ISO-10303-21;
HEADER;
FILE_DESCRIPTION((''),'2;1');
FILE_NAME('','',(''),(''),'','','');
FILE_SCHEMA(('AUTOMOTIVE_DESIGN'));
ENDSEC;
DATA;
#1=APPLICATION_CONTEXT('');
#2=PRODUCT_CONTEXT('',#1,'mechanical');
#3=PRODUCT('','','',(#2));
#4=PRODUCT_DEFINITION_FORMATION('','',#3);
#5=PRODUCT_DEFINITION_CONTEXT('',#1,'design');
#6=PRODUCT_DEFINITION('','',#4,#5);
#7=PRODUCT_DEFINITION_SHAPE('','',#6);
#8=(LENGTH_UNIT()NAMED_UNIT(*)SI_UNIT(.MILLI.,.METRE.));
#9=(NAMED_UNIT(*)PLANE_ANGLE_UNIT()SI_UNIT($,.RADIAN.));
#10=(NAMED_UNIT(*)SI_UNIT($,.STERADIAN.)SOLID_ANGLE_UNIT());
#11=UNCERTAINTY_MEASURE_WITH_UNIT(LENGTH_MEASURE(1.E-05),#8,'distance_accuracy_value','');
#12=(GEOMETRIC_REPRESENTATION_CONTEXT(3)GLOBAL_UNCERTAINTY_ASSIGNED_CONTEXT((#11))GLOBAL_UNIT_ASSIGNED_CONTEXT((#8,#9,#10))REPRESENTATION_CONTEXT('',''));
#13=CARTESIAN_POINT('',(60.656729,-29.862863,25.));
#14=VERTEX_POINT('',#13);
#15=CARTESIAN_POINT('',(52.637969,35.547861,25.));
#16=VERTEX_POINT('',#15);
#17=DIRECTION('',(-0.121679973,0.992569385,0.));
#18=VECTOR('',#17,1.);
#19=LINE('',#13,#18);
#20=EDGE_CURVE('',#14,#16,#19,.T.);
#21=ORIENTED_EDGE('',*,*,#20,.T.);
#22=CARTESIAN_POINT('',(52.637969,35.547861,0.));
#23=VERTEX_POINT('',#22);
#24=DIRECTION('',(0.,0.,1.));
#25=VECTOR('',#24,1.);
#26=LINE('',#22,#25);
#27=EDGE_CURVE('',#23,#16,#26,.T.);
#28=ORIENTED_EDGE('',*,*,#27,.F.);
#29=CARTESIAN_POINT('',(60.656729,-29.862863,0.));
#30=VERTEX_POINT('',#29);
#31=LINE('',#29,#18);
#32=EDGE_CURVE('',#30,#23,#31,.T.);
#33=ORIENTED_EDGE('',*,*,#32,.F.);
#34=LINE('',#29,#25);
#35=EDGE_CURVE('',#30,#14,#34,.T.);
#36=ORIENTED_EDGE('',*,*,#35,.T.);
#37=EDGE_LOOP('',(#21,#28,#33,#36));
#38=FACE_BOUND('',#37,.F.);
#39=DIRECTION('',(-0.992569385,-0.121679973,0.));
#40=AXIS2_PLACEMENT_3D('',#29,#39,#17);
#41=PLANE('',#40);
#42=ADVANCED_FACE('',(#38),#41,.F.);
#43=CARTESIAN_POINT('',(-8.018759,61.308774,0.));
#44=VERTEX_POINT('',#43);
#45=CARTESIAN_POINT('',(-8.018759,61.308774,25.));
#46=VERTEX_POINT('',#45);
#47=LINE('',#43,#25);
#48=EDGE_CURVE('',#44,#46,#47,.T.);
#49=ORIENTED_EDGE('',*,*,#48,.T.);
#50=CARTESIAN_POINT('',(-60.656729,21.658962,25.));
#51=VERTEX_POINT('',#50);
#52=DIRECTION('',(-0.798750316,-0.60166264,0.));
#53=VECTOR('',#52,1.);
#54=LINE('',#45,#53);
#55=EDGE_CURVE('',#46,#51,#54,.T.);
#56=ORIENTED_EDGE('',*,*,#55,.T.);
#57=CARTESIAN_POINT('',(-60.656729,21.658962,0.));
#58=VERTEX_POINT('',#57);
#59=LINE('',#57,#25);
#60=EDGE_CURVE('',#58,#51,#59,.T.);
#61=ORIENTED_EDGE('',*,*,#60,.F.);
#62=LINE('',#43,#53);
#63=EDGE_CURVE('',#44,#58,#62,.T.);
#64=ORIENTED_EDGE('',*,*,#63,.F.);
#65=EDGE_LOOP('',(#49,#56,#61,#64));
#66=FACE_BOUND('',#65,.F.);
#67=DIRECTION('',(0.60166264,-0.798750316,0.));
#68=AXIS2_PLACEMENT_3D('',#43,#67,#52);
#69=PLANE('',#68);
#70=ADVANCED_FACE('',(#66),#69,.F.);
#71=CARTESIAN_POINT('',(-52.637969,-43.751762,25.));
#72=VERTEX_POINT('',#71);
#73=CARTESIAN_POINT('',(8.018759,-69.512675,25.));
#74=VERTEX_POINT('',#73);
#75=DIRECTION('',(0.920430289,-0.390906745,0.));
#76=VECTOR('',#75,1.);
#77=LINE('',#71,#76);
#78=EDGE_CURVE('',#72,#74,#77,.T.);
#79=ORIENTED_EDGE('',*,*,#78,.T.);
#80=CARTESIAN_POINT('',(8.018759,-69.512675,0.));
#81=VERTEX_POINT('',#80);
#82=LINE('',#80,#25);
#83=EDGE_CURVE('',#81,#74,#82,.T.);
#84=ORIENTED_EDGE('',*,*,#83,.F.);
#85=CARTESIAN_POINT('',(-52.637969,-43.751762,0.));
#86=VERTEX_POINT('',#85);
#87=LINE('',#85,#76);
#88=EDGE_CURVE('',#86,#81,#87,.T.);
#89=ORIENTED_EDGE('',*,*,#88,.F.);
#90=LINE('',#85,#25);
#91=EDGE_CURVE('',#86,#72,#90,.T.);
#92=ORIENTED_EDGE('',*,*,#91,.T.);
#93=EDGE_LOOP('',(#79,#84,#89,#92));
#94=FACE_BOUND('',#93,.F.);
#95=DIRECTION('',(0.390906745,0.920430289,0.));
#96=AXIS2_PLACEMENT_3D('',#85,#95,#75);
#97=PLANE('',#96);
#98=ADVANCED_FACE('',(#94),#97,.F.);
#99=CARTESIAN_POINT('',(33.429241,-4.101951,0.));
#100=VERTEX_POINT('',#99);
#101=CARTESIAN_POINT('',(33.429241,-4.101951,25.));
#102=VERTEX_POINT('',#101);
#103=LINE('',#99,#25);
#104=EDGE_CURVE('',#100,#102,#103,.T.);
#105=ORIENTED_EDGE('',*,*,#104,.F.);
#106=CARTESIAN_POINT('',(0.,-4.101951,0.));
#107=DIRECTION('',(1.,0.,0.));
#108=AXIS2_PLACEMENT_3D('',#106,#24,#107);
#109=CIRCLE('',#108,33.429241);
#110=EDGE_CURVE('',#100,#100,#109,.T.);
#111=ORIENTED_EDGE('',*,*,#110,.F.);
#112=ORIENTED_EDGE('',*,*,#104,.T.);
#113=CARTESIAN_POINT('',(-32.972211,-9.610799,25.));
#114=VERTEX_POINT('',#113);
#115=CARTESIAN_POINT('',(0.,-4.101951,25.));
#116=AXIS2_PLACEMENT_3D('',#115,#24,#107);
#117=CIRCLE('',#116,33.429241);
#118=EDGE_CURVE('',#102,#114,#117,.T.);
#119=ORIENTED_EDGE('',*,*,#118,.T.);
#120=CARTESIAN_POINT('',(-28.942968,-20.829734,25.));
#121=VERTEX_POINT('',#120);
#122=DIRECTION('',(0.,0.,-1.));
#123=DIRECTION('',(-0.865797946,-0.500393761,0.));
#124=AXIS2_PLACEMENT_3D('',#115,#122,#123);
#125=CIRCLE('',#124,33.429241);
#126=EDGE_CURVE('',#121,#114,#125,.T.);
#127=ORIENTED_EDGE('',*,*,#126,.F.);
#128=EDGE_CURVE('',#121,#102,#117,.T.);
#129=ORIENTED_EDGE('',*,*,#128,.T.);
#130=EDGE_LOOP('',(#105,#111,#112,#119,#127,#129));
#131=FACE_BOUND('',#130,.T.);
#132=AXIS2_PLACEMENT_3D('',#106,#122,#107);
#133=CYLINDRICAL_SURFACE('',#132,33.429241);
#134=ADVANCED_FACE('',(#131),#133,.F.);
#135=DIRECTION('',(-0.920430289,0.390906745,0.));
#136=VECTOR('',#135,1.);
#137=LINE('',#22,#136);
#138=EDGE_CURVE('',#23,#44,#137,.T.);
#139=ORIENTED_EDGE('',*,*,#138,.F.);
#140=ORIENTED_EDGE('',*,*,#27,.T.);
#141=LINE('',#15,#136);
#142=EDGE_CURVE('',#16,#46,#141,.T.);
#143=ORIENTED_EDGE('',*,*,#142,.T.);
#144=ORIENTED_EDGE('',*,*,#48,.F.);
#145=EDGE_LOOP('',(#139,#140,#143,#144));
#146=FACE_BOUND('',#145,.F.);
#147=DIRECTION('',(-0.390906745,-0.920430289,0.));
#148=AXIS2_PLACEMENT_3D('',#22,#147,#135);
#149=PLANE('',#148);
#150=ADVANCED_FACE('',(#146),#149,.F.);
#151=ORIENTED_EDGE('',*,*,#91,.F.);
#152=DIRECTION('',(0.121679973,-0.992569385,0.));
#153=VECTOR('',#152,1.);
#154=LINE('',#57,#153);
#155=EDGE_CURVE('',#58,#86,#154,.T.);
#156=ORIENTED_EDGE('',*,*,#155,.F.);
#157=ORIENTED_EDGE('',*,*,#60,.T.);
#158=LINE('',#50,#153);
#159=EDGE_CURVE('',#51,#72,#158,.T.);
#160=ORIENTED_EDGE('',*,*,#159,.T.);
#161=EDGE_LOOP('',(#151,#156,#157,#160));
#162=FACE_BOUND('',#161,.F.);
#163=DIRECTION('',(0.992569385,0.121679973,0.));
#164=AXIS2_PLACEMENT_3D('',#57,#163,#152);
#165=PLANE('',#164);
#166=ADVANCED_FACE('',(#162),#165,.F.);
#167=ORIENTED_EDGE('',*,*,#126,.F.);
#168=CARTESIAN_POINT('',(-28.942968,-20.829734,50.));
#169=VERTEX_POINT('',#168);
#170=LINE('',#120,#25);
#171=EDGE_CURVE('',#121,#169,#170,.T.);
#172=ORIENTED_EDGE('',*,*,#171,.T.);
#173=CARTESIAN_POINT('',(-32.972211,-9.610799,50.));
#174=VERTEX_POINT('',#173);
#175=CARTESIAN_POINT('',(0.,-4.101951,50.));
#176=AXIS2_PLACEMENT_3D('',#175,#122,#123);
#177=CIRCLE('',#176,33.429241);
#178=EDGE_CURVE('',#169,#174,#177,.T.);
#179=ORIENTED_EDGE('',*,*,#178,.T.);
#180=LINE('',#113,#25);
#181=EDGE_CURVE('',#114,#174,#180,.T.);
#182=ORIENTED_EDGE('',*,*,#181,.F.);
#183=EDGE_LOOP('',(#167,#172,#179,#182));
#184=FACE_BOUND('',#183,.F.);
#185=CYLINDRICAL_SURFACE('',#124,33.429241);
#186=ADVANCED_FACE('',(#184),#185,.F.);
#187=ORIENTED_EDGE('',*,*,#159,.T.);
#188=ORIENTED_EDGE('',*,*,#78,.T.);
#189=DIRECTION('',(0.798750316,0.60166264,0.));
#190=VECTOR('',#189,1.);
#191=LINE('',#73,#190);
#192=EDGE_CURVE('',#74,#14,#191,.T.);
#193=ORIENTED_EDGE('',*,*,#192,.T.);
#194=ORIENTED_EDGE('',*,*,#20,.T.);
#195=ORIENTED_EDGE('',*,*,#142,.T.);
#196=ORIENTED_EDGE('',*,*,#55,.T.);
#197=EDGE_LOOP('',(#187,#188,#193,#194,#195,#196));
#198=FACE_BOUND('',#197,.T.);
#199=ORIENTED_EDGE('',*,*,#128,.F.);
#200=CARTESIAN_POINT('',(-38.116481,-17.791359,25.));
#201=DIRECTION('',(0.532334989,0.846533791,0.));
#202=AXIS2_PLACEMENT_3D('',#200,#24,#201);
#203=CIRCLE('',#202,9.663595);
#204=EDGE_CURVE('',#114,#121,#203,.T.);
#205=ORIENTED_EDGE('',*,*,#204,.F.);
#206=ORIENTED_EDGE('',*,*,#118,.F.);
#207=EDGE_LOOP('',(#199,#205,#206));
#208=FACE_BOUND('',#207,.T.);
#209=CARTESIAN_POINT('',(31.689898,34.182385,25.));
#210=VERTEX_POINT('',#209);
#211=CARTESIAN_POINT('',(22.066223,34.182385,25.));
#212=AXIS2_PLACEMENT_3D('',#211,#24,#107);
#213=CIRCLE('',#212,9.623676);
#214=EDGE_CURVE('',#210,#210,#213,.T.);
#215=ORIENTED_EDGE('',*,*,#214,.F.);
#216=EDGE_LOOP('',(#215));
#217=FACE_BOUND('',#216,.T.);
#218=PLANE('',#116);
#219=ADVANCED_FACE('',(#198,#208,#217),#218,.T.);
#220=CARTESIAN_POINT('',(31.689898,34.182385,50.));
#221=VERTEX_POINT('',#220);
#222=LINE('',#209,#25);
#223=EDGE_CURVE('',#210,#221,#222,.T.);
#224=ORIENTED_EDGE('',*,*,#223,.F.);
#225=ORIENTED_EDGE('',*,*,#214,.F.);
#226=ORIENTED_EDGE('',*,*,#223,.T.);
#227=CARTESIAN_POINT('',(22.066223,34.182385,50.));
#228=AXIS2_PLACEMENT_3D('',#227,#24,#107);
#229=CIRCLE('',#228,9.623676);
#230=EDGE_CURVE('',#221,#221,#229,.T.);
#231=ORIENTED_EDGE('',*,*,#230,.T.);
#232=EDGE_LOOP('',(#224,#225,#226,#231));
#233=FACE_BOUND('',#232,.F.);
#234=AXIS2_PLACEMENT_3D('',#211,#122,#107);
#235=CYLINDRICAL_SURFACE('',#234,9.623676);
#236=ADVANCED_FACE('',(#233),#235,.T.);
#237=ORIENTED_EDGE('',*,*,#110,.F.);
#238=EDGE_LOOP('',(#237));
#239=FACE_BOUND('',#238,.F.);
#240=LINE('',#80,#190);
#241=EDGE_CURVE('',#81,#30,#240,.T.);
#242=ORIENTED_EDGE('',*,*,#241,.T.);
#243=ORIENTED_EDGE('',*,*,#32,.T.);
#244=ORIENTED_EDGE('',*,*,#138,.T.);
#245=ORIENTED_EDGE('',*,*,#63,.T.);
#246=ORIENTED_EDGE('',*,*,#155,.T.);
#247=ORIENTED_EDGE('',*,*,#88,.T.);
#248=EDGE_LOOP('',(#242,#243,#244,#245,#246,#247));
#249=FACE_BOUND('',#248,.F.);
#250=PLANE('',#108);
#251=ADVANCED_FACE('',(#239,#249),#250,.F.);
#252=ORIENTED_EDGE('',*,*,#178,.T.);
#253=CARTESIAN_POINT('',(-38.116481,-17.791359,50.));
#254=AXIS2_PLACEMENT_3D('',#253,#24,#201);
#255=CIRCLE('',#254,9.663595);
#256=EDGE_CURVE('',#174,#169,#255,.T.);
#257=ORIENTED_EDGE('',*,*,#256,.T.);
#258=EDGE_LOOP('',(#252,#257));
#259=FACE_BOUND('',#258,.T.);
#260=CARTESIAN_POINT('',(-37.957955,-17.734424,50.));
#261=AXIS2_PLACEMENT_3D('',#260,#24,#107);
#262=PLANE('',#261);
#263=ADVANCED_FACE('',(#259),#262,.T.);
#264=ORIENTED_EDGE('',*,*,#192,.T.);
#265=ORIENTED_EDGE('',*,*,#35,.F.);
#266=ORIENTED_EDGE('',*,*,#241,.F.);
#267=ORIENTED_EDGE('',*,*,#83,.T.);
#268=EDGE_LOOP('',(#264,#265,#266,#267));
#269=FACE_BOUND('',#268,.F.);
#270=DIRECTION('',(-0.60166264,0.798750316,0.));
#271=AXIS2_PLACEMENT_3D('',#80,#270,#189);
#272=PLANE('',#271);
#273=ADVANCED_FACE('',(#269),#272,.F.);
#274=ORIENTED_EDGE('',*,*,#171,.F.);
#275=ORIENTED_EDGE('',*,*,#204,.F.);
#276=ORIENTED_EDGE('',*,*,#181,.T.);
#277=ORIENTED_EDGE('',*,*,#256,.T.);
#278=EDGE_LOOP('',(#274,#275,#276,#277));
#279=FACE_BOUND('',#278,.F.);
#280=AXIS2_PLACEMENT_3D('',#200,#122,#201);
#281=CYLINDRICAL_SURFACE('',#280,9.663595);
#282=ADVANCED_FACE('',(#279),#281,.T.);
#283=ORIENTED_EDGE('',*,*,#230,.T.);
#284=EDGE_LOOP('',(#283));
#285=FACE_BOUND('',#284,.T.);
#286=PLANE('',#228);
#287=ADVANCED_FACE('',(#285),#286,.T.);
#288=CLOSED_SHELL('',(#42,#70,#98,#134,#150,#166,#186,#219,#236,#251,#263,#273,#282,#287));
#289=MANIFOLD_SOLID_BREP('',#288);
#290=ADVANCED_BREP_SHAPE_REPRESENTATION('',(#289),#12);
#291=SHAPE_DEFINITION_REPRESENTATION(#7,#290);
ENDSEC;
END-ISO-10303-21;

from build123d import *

# Parameters (mm, degrees)
F0_R     = 33.4292406747
F1_DEPTH = 25
F2_R     = 9.6236756303
F3_DEPTH = 25


# Not quite as in the source:
# - after a boolean that leaves OpenCascade's solid faulty, fix() repairs it


with BuildPart() as f1:
    # F0 (on Top) → F1 (new body)
    with BuildSketch(Plane.XY):
        Polygon((-8.0187594833, 61.3087737227), (-60.6567287502, 21.6589621043), (-52.6379692669, -43.7517622936), (8.0187594833, -69.5126750732), (60.6567287502, -29.8628634548), (52.6379692669, 35.5478609431), align=None)
        with Locations((0, -4.1019506752)):
            Circle(F0_R, mode=Mode.SUBTRACT)
    extrude(amount=F1_DEPTH)

    # F2 (on face) → F3 (join)
    with BuildSketch(Plane.XY.offset(25)):
        with BuildLine():
            ThreePointArc((-28.942967923, -20.8297341476), (-31.4616986723, -15.4013156461), (-32.9722113693, -9.6107989674))
            ThreePointArc((-32.9722113693, -9.6107989674), (-47.2113068424, -21.0577353047), (-28.942967923, -20.8297341476))
        make_face()
        with Locations((22.0662225038, 34.1823846102)):
            Circle(F2_R)
    extrude(amount=F3_DEPTH)

    add(f1.part.fix(), mode=Mode.REPLACE)


solid = f1.part
